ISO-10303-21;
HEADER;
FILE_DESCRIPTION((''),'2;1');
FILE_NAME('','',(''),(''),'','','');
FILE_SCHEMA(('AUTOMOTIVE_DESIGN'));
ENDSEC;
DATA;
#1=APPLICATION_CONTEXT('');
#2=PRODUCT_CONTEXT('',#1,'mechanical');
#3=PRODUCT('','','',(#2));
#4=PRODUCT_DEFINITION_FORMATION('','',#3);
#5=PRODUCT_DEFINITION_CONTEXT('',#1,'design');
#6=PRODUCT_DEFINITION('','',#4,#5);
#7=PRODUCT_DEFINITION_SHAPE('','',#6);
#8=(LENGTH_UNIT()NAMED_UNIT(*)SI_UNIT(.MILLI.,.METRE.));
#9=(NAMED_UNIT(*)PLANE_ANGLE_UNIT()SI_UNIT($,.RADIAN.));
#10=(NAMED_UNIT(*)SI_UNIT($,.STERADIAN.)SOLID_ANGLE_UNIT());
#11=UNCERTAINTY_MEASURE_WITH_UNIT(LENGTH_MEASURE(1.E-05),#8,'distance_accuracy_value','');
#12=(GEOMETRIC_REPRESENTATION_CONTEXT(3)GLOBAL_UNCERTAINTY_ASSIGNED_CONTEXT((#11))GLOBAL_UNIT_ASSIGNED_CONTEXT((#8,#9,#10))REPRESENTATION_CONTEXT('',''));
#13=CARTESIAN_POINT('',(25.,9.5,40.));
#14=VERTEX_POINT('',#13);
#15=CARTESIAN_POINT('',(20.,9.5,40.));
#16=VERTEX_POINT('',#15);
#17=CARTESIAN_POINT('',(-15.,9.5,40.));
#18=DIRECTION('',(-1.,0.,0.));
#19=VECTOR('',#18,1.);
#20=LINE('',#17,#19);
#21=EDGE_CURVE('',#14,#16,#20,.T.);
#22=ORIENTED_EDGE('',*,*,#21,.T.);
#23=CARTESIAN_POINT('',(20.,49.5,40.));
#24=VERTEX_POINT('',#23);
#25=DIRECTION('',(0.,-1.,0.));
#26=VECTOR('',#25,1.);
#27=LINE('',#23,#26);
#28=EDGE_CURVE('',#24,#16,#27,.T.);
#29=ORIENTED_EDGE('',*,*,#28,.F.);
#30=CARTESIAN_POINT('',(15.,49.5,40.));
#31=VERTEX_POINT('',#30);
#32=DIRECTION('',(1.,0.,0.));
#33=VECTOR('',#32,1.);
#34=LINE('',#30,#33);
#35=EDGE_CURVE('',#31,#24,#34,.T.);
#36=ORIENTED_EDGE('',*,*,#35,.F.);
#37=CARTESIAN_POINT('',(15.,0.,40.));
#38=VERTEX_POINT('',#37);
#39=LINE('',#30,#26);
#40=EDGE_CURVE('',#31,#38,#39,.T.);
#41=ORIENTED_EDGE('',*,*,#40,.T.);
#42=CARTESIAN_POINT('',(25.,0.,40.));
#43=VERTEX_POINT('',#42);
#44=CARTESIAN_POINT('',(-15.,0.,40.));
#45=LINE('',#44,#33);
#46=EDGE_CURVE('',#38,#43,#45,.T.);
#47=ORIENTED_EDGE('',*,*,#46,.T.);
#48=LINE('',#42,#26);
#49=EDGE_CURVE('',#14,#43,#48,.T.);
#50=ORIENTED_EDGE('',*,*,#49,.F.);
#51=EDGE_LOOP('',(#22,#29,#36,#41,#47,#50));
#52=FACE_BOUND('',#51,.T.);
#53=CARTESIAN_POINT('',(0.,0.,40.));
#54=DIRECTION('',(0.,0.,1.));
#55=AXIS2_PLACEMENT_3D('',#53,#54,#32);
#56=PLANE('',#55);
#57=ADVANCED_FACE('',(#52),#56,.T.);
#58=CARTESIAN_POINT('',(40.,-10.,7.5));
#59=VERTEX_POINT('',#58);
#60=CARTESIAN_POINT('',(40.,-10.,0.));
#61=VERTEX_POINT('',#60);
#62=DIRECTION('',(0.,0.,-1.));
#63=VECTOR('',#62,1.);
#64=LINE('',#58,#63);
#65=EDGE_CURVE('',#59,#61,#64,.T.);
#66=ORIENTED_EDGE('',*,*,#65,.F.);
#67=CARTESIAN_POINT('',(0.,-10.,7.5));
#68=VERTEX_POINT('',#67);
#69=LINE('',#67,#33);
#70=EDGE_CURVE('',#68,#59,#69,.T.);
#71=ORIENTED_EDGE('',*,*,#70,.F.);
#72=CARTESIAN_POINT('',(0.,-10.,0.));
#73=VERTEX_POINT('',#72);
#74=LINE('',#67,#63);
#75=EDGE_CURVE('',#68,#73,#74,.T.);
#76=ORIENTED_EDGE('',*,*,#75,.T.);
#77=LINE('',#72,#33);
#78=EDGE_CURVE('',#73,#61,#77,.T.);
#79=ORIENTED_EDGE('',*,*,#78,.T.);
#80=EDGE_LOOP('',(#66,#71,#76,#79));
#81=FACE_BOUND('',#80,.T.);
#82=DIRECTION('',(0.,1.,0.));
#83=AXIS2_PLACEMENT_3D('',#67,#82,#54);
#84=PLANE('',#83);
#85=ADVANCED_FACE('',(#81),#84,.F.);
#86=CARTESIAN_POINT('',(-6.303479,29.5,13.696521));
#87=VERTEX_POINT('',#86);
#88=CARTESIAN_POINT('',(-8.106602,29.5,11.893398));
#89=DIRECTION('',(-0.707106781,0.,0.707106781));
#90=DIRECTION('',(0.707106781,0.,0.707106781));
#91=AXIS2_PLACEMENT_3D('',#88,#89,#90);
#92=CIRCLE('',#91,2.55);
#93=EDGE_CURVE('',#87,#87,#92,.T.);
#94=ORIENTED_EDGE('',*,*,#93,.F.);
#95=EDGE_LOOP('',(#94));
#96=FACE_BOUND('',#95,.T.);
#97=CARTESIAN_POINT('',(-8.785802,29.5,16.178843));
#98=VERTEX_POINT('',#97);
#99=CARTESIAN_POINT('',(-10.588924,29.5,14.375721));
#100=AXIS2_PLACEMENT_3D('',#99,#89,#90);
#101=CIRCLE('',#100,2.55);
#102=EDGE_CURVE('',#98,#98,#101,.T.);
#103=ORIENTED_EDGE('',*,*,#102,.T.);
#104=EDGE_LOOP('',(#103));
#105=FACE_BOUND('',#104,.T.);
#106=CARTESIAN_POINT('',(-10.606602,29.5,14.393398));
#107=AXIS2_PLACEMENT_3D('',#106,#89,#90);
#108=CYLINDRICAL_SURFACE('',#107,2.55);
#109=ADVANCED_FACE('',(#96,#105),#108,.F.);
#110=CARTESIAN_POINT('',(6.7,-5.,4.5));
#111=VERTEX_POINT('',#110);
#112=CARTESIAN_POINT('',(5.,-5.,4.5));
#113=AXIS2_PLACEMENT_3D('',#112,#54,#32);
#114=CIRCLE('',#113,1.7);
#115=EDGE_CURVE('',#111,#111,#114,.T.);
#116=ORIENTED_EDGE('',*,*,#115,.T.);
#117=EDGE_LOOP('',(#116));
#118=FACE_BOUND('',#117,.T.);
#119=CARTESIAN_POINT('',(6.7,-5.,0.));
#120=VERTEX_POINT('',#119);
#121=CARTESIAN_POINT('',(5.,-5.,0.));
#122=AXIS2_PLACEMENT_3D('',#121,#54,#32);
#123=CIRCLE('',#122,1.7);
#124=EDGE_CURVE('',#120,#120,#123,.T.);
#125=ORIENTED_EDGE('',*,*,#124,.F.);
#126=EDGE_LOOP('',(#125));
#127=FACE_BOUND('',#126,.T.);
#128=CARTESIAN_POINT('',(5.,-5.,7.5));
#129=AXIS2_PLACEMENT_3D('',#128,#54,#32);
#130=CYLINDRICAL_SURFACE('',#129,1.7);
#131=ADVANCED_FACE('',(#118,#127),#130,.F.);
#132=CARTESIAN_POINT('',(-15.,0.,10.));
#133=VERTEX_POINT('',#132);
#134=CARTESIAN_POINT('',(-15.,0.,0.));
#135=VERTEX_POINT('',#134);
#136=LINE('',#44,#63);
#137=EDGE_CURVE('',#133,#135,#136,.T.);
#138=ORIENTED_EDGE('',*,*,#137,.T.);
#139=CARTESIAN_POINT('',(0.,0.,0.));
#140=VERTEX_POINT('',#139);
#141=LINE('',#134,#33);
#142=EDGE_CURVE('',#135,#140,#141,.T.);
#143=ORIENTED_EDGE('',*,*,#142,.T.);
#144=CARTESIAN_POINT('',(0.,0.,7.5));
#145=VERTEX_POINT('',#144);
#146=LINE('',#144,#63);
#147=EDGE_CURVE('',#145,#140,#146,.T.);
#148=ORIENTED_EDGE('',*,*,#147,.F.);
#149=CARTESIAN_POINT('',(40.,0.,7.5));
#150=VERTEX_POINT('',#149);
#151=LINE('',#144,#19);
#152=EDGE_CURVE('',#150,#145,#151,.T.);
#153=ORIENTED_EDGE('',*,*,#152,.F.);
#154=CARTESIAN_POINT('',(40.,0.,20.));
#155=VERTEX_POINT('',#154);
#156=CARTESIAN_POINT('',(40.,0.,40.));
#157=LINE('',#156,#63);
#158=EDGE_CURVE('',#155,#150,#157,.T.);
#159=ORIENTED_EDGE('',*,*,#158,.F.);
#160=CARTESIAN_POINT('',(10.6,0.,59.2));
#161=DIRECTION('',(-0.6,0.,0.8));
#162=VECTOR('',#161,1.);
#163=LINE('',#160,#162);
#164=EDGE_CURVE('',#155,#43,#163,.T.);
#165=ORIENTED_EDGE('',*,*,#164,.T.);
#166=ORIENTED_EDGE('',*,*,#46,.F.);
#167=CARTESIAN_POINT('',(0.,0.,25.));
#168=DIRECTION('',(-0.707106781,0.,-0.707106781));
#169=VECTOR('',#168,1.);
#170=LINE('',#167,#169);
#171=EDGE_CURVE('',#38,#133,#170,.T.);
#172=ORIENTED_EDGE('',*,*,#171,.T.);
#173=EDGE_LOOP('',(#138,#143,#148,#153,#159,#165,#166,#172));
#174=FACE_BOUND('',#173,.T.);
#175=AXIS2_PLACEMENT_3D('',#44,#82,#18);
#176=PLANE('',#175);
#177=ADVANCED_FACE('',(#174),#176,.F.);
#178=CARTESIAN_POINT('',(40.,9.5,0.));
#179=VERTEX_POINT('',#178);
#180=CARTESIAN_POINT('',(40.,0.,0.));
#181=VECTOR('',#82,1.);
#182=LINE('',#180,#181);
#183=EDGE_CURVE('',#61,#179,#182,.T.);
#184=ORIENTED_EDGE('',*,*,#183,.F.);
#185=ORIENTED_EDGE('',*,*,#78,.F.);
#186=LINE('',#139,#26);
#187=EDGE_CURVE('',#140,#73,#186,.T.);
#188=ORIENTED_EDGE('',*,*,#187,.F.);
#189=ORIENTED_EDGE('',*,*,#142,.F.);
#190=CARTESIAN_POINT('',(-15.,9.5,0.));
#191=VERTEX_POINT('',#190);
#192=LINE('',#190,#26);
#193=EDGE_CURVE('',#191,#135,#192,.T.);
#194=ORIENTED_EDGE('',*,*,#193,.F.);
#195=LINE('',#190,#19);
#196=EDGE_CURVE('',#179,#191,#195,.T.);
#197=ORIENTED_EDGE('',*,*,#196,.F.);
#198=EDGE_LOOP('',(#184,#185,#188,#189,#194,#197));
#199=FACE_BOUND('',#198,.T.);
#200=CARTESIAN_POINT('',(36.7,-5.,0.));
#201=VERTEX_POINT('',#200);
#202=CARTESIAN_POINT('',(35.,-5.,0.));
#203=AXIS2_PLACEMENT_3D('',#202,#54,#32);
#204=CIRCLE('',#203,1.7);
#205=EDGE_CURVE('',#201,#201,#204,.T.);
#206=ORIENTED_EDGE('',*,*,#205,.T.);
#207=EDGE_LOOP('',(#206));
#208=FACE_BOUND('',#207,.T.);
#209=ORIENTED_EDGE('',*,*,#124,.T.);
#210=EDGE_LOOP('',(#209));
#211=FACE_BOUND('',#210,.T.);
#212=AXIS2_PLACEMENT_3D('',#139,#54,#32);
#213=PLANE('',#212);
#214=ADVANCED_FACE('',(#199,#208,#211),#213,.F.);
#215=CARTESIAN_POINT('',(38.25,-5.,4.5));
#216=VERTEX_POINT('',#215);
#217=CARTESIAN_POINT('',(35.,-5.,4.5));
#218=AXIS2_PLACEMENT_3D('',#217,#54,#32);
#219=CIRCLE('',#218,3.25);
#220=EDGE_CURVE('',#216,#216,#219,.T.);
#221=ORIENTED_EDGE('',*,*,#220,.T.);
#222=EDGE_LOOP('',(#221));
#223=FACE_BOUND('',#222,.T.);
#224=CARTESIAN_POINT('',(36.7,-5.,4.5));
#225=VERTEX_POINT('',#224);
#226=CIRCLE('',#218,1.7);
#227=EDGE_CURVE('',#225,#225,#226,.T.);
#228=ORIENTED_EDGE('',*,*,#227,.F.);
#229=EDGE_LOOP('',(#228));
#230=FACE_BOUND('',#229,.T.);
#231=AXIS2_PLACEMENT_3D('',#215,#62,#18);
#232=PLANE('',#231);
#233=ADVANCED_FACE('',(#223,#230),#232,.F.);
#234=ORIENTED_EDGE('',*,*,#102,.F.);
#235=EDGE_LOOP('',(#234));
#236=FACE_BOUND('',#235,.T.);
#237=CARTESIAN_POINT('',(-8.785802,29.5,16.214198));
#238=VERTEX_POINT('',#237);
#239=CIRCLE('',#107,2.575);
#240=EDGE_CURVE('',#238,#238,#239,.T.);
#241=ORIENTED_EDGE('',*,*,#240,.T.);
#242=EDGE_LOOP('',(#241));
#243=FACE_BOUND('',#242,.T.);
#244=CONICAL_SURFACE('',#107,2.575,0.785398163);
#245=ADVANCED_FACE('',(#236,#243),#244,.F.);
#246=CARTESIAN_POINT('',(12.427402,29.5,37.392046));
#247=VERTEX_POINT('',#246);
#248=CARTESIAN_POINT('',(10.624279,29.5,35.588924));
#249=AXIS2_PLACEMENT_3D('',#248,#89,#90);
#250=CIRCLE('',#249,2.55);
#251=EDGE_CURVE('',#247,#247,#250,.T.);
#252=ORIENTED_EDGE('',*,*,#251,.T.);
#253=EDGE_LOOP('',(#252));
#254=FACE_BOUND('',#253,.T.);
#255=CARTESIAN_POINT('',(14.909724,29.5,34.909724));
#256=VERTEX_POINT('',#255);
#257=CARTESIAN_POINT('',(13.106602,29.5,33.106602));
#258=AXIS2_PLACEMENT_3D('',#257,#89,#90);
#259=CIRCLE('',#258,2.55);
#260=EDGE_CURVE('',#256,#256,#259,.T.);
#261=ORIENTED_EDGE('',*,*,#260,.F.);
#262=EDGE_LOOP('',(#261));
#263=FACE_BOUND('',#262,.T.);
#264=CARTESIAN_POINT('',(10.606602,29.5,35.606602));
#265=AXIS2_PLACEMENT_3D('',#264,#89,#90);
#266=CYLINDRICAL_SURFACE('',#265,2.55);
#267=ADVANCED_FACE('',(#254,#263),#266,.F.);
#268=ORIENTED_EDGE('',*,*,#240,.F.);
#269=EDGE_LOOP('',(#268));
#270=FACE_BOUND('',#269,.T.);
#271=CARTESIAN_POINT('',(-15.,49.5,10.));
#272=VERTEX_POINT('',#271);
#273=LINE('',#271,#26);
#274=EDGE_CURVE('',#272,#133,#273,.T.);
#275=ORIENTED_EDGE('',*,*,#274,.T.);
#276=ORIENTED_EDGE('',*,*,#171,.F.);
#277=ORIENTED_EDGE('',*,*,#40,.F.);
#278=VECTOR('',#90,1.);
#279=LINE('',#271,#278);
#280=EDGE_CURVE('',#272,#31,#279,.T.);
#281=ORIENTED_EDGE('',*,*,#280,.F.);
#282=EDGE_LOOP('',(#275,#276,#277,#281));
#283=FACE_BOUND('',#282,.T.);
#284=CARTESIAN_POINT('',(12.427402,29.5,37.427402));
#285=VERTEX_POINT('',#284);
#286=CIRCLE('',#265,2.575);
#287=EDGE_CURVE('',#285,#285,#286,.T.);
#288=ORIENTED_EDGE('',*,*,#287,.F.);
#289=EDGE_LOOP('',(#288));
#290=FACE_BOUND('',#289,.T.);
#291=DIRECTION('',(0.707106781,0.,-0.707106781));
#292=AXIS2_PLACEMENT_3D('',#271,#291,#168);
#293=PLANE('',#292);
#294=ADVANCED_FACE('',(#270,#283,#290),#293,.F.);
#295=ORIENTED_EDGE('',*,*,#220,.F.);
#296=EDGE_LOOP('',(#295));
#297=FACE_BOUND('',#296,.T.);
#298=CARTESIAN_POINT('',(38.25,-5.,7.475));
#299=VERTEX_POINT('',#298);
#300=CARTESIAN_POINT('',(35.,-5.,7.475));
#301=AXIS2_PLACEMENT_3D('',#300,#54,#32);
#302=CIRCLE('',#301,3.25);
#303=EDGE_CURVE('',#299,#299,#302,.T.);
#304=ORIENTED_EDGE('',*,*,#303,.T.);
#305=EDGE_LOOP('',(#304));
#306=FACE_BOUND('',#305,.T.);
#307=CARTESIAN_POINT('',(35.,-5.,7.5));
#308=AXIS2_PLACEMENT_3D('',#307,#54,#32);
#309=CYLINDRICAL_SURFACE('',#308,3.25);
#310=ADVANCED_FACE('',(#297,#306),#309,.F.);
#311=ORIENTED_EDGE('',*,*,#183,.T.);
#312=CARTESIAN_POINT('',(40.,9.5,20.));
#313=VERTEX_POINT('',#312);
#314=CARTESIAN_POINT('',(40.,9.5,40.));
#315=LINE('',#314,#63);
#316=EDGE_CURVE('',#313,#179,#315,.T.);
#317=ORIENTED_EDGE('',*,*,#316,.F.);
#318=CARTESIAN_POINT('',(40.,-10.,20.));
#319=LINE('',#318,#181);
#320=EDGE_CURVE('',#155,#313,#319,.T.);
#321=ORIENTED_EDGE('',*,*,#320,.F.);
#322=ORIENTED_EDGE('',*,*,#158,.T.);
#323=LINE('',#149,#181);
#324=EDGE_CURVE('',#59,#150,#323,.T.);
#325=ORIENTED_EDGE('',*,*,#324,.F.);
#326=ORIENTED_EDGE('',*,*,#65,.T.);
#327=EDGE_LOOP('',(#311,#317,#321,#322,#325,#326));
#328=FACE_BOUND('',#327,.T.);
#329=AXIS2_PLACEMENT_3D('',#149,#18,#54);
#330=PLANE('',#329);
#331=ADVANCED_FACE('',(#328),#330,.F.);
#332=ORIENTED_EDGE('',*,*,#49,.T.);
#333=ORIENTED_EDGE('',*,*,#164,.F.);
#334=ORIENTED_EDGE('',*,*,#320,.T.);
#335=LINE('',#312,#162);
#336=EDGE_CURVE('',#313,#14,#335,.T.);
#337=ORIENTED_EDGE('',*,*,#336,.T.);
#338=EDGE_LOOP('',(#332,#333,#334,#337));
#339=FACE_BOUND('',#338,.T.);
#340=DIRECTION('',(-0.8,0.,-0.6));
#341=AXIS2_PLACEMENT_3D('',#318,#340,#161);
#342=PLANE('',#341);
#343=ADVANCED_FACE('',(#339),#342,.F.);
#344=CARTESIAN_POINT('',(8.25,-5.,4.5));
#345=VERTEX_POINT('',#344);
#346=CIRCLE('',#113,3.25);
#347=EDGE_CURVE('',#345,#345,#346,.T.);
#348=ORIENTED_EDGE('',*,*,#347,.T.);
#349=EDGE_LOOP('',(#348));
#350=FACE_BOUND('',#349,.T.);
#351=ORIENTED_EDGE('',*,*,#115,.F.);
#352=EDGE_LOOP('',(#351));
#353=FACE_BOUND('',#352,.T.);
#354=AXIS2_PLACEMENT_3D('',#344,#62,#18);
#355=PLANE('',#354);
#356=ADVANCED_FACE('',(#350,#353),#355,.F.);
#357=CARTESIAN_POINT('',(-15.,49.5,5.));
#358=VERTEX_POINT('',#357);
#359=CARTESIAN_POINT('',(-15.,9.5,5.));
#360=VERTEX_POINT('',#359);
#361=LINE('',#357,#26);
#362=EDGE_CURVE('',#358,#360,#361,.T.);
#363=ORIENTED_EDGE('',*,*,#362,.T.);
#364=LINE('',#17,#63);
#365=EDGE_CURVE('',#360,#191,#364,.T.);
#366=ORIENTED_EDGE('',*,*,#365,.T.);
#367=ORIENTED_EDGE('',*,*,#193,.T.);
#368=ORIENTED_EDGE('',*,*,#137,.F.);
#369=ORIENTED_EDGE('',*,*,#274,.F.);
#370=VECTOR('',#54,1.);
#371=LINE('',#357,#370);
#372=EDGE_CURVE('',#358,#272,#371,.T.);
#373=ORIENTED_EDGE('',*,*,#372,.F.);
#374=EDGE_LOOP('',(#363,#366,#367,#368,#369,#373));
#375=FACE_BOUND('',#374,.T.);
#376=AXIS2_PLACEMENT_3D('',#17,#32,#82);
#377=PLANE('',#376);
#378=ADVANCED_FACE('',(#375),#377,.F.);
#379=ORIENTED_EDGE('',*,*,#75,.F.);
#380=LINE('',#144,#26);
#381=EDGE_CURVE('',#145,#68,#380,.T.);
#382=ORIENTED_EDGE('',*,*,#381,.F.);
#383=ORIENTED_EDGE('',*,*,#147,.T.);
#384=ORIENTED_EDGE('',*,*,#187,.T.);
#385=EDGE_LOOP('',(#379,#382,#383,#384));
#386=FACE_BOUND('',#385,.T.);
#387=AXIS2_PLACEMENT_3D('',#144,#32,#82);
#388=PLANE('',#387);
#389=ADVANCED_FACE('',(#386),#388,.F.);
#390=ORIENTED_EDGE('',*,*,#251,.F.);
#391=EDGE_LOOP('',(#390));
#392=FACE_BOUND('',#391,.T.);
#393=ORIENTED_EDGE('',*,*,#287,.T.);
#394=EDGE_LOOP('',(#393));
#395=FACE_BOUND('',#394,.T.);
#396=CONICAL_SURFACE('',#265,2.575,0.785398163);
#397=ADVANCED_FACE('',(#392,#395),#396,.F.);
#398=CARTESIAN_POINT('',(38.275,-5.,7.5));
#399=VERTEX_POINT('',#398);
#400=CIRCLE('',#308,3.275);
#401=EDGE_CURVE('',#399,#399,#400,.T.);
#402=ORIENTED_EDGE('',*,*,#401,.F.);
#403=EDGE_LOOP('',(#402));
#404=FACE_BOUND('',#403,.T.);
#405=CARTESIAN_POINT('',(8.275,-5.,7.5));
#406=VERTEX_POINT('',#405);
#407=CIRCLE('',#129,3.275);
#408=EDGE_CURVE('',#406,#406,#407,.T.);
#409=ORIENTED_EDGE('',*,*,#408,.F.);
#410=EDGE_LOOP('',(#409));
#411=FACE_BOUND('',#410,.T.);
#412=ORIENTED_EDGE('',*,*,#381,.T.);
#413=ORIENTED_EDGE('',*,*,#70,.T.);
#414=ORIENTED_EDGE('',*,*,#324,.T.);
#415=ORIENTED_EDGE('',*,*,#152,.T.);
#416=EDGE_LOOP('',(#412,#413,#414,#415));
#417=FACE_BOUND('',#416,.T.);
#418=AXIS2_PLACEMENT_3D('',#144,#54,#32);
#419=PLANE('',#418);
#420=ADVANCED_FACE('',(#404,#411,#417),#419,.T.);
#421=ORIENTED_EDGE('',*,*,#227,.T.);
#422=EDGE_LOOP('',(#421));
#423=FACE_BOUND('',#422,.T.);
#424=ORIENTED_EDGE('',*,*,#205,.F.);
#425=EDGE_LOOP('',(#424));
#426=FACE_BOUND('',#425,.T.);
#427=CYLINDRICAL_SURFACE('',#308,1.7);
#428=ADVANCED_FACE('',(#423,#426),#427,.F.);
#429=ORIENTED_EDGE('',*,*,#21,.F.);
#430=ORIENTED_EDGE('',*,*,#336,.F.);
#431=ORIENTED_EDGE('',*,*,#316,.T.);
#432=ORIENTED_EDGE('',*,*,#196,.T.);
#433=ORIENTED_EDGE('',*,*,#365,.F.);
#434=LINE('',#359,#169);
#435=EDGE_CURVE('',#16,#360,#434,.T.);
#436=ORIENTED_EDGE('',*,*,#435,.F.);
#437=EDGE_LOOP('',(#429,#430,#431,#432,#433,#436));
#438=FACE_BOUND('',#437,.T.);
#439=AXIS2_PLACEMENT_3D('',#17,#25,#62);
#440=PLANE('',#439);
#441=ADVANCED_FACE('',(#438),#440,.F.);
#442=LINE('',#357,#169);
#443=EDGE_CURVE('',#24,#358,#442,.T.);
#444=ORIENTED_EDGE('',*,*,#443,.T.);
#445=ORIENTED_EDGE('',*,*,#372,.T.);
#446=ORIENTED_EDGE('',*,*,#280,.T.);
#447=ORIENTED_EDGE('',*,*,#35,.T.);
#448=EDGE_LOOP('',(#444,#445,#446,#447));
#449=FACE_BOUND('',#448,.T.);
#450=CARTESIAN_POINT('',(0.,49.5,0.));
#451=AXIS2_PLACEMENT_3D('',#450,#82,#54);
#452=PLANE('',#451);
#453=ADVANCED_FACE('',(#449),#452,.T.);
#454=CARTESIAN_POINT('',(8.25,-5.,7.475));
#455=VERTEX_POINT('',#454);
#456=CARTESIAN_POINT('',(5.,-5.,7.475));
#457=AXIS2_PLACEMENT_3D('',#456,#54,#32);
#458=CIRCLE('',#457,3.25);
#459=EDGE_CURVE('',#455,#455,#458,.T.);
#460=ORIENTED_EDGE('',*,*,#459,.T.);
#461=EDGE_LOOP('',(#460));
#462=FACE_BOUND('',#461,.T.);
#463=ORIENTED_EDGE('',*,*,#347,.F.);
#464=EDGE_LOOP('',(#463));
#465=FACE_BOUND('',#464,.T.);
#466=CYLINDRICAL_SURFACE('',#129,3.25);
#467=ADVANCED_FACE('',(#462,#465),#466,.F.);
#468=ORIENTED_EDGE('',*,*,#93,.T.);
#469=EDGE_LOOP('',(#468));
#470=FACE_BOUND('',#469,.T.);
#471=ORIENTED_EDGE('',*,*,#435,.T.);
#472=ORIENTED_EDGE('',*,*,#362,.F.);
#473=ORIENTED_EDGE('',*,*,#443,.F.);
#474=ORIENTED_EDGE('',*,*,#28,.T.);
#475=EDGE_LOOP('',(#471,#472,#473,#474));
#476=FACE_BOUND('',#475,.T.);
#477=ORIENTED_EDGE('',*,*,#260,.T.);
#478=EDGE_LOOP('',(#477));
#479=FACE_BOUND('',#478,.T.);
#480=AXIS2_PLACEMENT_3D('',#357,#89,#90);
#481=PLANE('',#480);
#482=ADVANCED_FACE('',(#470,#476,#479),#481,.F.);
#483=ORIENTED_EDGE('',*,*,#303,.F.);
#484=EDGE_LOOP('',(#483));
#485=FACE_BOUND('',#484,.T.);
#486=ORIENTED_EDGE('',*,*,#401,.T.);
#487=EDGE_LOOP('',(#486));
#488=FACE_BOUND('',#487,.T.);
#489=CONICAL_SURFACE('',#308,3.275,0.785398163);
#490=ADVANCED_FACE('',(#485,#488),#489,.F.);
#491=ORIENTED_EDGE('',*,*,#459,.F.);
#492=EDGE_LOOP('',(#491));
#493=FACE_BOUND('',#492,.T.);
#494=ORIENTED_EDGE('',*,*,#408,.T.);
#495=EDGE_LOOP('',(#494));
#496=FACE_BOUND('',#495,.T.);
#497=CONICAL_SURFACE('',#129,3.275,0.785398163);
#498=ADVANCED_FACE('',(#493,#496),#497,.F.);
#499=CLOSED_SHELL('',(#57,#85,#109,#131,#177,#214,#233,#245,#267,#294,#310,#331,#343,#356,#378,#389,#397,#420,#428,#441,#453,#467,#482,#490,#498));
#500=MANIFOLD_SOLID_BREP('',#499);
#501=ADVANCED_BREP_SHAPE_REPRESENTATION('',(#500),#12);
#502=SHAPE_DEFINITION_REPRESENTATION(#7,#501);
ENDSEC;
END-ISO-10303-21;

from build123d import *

# Parameters (mm, degrees)
SKETCH1_W                     = 40
SKETCH1_H                     = 10
BOSS_EXTRUDE1_DEPTH           = 7.5
CBORE_FOR_M3_SHCS1_AT_2_COUNT = 2
CBORE_FOR_M3_SHCS1_AT_2_PITCH = 30
SKETCH4_W                     = 55
SKETCH4_H                     = 9.5
BOSS_EXTRUDE2_DEPTH           = 40
BOSS_EXTRUDE3_DEPTH           = 40
CUT_EXTRUDE1_DEPTH            = 70.282032303
CUT_EXTRUDE2_DEPTH            = 70.282032303


# Read off the part's stored shape, not the designer's step: Ø5.1 (5.1) Diameter Hole1
with BuildPart() as part:
    # Sketch1 → Boss-Extrude1 (new body)
    with BuildSketch(Plane.XY):
        with Locations((20, -5)):
            Rectangle(SKETCH1_W, SKETCH1_H)
    extrude(amount=BOSS_EXTRUDE1_DEPTH)

    # Sketch3 → CBORE for M3 SHCS1 (revolve, cut)
    with BuildSketch(Plane(origin=(35, -5, 7.5), x_dir=(0, -1, 0), z_dir=(1, 0, 0))):
        Polygon((0, 0), (0, 7.5), (1.7, 7.5), (1.7, 3), (3.25, 3), (3.25, 0.025), (3.275, 0), align=None)
    cbore_for_m3_shcs1 = revolve(axis=Axis((35, -5, 13.85), (0, 0, -1)), mode=Mode.SUBTRACT)

    # CBORE for M3 SHCS1 at 2: CBORE for M3 SHCS1 ×2
    with Locations(*[(-i * CBORE_FOR_M3_SHCS1_AT_2_PITCH, 0, 0) for i in range(1, CBORE_FOR_M3_SHCS1_AT_2_COUNT)]):
        add(cbore_for_m3_shcs1, mode=Mode.SUBTRACT)

    # Sketch4 → Boss-Extrude2 (add)
    with BuildSketch(Plane.XY):
        with Locations((12.5, 4.75)):
            Rectangle(SKETCH4_W, SKETCH4_H)
    extrude(amount=BOSS_EXTRUDE2_DEPTH)

    # Sketch5 → Boss-Extrude3 (add)
    with BuildSketch(Plane(origin=(0, 9.5, 0), x_dir=(1, 0, 0), z_dir=(0, 1, 0))):
        Polygon((-15, -5), (20, -40), (15, -40), (-15, -10), align=None)
    extrude(amount=BOSS_EXTRUDE3_DEPTH)

    # Sketch7 → Cut-Extrude1 (cut, through all)
    with BuildSketch(Plane(origin=(0, 9.5, 0), x_dir=(1, 0, 0), z_dir=(0, 1, 0))):
        Polygon((15, -40), (-15, -10), (-15, -40), align=None)
    extrude(amount=-CUT_EXTRUDE1_DEPTH, mode=Mode.SUBTRACT)

    # Ø5.1 (5.1) Diameter Hole1 outline → Ø5.1 (5.1) Diameter Hole1 (revolve, cut)
    with BuildSketch(Plane(origin=(23.106601718, 29.5, 23.106601718), x_dir=(0.7071067811865471, 0, 0.707106781186548), z_dir=(0, 1, 0))):
        Polygon((2.55, -17.65266953), (2.55, -14.142135624), (0, -14.142135624), (0, -17.67766953), (2.575, -17.67766953), align=None)
    revolve(axis=Axis((23.106601718, 29.5, 23.106601718), (0.707106781186548, 0, -0.7071067811865471)), mode=Mode.SUBTRACT)

    # 5.1 _5.1_ Diameter Hole1 2 outline → 5.1 _5.1_ Diameter Hole1 2 (revolve, cut)
    with BuildSketch(Plane(origin=(1.893398282, 29.5, 1.893398282), x_dir=(0.7071067811865471, 0, 0.707106781186548), z_dir=(0, 1, 0))):
        Polygon((2.55, -17.65266953), (2.55, -14.142135624), (0, -14.142135624), (0, -17.67766953), (2.575, -17.67766953), align=None)
    revolve(axis=Axis((1.893398282, 29.5, 1.893398282), (0.707106781186548, 0, -0.7071067811865471)), mode=Mode.SUBTRACT)

    # Sketch11 → Cut-Extrude2 (cut, through all)
    with BuildSketch(Plane(origin=(0, 9.5, 0), x_dir=(1, 0, 0), z_dir=(0, 1, 0))):
        Polygon((40, -20), (25, -40), (40, -40), align=None)
    extrude(amount=-CUT_EXTRUDE2_DEPTH, mode=Mode.SUBTRACT)


solid = part.part
